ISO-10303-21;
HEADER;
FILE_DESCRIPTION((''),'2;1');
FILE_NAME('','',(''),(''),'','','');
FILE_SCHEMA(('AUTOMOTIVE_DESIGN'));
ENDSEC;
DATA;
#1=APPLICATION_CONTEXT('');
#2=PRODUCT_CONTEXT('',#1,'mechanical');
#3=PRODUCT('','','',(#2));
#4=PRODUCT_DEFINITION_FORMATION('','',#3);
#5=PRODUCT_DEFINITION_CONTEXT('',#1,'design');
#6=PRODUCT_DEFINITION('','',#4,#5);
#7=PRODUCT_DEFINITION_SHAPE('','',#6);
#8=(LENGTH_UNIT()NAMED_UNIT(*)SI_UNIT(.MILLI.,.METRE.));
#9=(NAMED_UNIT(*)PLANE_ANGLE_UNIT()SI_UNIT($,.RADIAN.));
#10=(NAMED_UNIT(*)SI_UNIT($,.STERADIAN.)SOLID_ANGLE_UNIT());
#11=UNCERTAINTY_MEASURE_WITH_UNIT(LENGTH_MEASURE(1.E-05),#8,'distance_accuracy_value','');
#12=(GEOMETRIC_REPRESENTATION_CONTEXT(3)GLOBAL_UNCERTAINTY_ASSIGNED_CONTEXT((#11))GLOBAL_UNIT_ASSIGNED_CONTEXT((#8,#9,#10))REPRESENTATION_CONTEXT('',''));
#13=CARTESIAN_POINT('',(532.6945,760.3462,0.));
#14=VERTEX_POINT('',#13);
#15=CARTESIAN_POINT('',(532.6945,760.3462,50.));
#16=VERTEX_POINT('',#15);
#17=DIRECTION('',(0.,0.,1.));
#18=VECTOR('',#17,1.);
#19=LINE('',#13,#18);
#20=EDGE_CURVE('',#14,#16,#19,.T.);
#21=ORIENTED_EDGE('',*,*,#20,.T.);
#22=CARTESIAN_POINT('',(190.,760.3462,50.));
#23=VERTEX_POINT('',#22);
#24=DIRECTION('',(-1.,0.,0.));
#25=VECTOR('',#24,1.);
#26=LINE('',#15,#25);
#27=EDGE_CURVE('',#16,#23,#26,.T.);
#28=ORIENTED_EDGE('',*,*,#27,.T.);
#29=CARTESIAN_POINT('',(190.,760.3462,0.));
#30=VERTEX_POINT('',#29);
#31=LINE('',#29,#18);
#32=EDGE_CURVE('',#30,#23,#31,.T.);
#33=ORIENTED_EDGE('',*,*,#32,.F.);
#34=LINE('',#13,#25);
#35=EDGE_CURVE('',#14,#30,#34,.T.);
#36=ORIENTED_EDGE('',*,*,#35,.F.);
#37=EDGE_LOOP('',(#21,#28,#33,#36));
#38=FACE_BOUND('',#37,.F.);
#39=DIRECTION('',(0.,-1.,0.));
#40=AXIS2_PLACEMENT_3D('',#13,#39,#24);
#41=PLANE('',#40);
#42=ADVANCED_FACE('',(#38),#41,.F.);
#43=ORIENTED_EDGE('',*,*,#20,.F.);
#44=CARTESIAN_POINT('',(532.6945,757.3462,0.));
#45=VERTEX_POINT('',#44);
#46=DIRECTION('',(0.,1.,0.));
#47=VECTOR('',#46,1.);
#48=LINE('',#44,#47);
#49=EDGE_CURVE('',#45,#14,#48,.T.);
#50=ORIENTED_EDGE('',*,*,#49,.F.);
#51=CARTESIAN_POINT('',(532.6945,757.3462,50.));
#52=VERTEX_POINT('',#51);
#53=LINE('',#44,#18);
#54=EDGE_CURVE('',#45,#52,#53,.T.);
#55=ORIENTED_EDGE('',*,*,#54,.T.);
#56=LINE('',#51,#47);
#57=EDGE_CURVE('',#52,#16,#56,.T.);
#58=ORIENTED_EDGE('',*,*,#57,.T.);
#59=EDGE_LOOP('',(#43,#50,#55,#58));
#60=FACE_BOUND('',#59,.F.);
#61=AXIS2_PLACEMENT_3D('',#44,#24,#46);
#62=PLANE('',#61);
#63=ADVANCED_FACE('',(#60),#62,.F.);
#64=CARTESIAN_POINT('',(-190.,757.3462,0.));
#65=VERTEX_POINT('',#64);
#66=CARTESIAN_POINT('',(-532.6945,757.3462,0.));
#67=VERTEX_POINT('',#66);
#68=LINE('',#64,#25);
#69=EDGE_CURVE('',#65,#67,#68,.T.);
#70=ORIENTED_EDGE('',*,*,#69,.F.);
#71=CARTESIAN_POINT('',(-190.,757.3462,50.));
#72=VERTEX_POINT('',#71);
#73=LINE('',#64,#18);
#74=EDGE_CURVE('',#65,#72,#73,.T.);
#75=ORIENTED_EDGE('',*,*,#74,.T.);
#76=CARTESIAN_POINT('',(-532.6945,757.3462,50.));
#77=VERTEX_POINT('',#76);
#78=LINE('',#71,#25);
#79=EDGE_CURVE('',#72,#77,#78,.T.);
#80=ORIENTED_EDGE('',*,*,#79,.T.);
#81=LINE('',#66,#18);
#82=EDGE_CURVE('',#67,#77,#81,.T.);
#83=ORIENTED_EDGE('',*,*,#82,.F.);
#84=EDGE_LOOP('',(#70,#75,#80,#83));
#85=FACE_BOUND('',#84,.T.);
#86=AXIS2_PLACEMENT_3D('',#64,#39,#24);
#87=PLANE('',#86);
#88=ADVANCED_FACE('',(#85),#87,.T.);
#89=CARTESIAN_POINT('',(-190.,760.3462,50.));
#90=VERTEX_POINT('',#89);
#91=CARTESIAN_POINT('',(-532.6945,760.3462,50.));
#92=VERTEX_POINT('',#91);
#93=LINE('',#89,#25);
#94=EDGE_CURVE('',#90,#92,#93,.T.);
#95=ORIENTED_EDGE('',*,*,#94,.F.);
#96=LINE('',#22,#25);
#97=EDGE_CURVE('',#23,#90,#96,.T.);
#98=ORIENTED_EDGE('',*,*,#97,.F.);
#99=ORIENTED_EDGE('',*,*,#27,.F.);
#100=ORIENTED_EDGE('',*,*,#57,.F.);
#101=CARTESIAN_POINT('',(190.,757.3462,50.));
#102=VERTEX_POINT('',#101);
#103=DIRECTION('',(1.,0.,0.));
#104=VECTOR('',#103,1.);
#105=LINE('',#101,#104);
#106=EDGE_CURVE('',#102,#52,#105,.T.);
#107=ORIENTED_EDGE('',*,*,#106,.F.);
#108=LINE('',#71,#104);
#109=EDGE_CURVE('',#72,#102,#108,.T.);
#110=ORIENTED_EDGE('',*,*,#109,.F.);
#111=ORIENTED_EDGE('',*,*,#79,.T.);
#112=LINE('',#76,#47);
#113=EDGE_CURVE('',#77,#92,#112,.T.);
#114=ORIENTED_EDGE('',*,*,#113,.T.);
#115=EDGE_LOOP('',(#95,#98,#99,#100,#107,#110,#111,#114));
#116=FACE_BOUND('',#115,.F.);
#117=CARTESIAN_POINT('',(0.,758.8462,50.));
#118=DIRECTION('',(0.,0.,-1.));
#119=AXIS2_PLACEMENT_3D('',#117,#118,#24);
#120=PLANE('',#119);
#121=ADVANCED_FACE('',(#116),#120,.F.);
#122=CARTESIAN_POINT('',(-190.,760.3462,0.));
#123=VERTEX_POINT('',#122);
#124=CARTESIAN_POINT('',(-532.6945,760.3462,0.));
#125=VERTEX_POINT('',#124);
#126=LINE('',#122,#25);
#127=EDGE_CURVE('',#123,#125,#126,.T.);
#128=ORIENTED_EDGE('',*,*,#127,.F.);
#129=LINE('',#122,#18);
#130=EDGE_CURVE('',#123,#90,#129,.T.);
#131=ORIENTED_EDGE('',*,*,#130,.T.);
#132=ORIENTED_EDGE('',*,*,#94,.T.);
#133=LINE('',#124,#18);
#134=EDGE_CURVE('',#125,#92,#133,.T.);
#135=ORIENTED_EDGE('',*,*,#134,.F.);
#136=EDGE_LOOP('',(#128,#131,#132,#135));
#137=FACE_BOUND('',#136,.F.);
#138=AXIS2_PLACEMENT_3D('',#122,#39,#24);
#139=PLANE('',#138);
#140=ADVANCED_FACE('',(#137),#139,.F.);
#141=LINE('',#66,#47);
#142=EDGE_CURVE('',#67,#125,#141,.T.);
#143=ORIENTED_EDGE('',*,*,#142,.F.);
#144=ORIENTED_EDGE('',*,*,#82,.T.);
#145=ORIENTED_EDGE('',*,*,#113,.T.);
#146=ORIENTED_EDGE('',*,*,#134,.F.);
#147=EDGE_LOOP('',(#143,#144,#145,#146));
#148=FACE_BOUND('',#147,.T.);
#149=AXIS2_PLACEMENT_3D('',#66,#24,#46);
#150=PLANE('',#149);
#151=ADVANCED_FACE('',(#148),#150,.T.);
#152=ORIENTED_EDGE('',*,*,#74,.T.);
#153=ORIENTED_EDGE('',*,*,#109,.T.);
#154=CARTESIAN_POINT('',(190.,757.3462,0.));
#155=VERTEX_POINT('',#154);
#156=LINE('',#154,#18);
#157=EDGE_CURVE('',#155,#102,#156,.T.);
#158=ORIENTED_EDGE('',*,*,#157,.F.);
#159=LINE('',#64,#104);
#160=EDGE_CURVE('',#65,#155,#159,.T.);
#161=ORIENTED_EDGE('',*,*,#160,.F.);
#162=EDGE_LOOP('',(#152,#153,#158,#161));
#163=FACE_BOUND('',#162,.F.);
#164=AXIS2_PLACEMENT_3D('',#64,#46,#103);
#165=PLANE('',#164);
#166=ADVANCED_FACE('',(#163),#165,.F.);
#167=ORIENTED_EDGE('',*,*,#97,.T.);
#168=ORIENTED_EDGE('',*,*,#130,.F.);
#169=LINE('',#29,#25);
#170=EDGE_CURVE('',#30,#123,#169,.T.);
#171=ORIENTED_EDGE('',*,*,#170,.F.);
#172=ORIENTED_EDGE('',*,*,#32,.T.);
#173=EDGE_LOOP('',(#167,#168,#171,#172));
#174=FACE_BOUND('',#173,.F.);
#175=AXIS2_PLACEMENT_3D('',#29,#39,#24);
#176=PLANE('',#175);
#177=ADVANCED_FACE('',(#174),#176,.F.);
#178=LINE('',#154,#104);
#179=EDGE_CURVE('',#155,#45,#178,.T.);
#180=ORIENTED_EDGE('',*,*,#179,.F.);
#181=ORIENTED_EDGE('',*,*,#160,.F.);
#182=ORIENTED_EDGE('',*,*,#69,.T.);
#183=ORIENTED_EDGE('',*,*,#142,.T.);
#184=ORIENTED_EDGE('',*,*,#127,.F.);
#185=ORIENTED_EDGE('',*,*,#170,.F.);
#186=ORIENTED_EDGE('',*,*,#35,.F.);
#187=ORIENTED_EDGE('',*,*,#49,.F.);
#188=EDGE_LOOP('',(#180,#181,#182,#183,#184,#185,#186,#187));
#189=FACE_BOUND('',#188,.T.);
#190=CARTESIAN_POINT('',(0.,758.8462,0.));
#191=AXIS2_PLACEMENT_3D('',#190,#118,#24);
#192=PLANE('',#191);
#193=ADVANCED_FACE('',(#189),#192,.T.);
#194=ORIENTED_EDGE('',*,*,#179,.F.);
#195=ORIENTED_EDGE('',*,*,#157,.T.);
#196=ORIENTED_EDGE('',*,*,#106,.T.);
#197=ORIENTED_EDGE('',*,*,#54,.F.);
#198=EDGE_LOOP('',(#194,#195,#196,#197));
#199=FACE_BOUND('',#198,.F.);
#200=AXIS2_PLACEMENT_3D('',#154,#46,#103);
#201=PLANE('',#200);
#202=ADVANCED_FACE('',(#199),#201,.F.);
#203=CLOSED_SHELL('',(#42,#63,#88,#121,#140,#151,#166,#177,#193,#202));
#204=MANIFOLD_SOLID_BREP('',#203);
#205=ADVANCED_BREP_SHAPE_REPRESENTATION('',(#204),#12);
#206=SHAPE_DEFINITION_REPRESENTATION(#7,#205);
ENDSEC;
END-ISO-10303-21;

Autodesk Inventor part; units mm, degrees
ref_plane "YZ Plane" through (0, 0, 0) normal (1, 0, 0) x (0, 1, 0)
ref_plane "XZ Plane" through (0, 0, 0) normal (0, 1, 0) x (-1, 0, 0)
ref_plane "XY Plane" through (0, 0, 0) normal (0, 0, 1) x (1, 0, 0)
sketch "Sketch1" plane through (0, 0, 0) normal (0, 0, 1) x (1, 0, 0)
  line L0 (-749.422, 1137.6923) -> (749.422, 1137.6923) construction
  line L1 (-98.5795, 0) -> (98.5795, 0) construction
  line L2 (98.5795, 0) -> (749.422, 1137.6923) construction
  line L3 (-98.5795, 0) -> (-749.422, 1137.6923) construction
  line L4 (-190, 758.8462) -> (190, 758.8462)
  line L5 (190, 758.8462) -> (190, 378.8462) construction
  line L6 (190, 378.8462) -> (-190, 378.8462) construction
  line L7 (-190, 378.8462) -> (-190, 758.8462) construction
  line L8 (0, 1137.6923) -> (0, 0) construction
  line L9 (-190, 758.8462) -> (-190, 1137.6923) construction
  line L10 (190, 758.8462) -> (190, 1137.6923) construction
  line L11 (-190, 378.8462) -> (-190, 159.8058) construction
  line L12 (190, 378.8462) -> (190, 159.8058) construction
  line L13 (-570, 1137.6923) -> (-570, 824.0572) construction
  line L14 (-190, 758.8462) -> (-532.6945, 758.8462)
  line L15 (-190, 378.8462) -> (-315.307, 378.8462) construction
  line L16 (190, 378.8462) -> (315.307, 378.8462) construction
  line L17 (570, 1137.6923) -> (570, 824.0572) construction
  line L18 (190, 758.8462) -> (532.6945, 758.8462)
  line L19 (-571.5, 826.6793) -> (-568.5, 821.4352) construction
  point P0 (0, 758.8462)
  point P1 (-190, 568.8462)
  point P2 (0, 568.8462)
  dimension "d0" = 1498.844
  dimension "d1" = 197.159
  dimension "d2" = 1310.702
  dimension "d3" = 380
  dimension "d4" = 380
  dimension "d5" = 380
  dimension "d6" = 380
contour flange "Contour Flange1" sketch "Sketch1" thickness 3 bend radius 5 width 50 along (0, 0, 1) mid plane no both sides yes wall seen from (-361.3473, 758.8462, 0) lies toward (0, 1, 0) curves L14 L4 L18
bend "Bend1"
corner "Corner1"
equation "\"d5\" = d3"
equation "\"d6\" = d3"
equation "\"d7\" = Thickness"
equation "\"d8\" = BendReliefWidth"
equation "\"d9\" = BendReliefDepth"
equation "\"d10\" = MinimumRemnant"
equation "\"d11\" = TransitionRadius"
equation "\"d13\" = BendRadius"
equation "\"d15\" = CornerReliefSize"
equation "\"d16\" = GapSize"
equation "\"d17\" = JacobiRadiusSize"
equation "\"BendReliefWidth\" = Thickness"
equation "\"BendReliefDepth\" = 0.5 * Thickness"
equation "\"CornerReliefSize\" = 4 * Thickness"
equation "\"MinimumRemnant\" = 2 * Thickness"
equation "\"TransitionRadius\" = BendRadius"
equation "\"JacobiRadiusSize\" = BendRadius"
equation "\"GapSize\" = Thickness"
equation "\"Thickness\" = 3"
equation "\"BendRadius\" = 5"
properties part number "MSC 0561 rib cone" material "Stainless Steel"
